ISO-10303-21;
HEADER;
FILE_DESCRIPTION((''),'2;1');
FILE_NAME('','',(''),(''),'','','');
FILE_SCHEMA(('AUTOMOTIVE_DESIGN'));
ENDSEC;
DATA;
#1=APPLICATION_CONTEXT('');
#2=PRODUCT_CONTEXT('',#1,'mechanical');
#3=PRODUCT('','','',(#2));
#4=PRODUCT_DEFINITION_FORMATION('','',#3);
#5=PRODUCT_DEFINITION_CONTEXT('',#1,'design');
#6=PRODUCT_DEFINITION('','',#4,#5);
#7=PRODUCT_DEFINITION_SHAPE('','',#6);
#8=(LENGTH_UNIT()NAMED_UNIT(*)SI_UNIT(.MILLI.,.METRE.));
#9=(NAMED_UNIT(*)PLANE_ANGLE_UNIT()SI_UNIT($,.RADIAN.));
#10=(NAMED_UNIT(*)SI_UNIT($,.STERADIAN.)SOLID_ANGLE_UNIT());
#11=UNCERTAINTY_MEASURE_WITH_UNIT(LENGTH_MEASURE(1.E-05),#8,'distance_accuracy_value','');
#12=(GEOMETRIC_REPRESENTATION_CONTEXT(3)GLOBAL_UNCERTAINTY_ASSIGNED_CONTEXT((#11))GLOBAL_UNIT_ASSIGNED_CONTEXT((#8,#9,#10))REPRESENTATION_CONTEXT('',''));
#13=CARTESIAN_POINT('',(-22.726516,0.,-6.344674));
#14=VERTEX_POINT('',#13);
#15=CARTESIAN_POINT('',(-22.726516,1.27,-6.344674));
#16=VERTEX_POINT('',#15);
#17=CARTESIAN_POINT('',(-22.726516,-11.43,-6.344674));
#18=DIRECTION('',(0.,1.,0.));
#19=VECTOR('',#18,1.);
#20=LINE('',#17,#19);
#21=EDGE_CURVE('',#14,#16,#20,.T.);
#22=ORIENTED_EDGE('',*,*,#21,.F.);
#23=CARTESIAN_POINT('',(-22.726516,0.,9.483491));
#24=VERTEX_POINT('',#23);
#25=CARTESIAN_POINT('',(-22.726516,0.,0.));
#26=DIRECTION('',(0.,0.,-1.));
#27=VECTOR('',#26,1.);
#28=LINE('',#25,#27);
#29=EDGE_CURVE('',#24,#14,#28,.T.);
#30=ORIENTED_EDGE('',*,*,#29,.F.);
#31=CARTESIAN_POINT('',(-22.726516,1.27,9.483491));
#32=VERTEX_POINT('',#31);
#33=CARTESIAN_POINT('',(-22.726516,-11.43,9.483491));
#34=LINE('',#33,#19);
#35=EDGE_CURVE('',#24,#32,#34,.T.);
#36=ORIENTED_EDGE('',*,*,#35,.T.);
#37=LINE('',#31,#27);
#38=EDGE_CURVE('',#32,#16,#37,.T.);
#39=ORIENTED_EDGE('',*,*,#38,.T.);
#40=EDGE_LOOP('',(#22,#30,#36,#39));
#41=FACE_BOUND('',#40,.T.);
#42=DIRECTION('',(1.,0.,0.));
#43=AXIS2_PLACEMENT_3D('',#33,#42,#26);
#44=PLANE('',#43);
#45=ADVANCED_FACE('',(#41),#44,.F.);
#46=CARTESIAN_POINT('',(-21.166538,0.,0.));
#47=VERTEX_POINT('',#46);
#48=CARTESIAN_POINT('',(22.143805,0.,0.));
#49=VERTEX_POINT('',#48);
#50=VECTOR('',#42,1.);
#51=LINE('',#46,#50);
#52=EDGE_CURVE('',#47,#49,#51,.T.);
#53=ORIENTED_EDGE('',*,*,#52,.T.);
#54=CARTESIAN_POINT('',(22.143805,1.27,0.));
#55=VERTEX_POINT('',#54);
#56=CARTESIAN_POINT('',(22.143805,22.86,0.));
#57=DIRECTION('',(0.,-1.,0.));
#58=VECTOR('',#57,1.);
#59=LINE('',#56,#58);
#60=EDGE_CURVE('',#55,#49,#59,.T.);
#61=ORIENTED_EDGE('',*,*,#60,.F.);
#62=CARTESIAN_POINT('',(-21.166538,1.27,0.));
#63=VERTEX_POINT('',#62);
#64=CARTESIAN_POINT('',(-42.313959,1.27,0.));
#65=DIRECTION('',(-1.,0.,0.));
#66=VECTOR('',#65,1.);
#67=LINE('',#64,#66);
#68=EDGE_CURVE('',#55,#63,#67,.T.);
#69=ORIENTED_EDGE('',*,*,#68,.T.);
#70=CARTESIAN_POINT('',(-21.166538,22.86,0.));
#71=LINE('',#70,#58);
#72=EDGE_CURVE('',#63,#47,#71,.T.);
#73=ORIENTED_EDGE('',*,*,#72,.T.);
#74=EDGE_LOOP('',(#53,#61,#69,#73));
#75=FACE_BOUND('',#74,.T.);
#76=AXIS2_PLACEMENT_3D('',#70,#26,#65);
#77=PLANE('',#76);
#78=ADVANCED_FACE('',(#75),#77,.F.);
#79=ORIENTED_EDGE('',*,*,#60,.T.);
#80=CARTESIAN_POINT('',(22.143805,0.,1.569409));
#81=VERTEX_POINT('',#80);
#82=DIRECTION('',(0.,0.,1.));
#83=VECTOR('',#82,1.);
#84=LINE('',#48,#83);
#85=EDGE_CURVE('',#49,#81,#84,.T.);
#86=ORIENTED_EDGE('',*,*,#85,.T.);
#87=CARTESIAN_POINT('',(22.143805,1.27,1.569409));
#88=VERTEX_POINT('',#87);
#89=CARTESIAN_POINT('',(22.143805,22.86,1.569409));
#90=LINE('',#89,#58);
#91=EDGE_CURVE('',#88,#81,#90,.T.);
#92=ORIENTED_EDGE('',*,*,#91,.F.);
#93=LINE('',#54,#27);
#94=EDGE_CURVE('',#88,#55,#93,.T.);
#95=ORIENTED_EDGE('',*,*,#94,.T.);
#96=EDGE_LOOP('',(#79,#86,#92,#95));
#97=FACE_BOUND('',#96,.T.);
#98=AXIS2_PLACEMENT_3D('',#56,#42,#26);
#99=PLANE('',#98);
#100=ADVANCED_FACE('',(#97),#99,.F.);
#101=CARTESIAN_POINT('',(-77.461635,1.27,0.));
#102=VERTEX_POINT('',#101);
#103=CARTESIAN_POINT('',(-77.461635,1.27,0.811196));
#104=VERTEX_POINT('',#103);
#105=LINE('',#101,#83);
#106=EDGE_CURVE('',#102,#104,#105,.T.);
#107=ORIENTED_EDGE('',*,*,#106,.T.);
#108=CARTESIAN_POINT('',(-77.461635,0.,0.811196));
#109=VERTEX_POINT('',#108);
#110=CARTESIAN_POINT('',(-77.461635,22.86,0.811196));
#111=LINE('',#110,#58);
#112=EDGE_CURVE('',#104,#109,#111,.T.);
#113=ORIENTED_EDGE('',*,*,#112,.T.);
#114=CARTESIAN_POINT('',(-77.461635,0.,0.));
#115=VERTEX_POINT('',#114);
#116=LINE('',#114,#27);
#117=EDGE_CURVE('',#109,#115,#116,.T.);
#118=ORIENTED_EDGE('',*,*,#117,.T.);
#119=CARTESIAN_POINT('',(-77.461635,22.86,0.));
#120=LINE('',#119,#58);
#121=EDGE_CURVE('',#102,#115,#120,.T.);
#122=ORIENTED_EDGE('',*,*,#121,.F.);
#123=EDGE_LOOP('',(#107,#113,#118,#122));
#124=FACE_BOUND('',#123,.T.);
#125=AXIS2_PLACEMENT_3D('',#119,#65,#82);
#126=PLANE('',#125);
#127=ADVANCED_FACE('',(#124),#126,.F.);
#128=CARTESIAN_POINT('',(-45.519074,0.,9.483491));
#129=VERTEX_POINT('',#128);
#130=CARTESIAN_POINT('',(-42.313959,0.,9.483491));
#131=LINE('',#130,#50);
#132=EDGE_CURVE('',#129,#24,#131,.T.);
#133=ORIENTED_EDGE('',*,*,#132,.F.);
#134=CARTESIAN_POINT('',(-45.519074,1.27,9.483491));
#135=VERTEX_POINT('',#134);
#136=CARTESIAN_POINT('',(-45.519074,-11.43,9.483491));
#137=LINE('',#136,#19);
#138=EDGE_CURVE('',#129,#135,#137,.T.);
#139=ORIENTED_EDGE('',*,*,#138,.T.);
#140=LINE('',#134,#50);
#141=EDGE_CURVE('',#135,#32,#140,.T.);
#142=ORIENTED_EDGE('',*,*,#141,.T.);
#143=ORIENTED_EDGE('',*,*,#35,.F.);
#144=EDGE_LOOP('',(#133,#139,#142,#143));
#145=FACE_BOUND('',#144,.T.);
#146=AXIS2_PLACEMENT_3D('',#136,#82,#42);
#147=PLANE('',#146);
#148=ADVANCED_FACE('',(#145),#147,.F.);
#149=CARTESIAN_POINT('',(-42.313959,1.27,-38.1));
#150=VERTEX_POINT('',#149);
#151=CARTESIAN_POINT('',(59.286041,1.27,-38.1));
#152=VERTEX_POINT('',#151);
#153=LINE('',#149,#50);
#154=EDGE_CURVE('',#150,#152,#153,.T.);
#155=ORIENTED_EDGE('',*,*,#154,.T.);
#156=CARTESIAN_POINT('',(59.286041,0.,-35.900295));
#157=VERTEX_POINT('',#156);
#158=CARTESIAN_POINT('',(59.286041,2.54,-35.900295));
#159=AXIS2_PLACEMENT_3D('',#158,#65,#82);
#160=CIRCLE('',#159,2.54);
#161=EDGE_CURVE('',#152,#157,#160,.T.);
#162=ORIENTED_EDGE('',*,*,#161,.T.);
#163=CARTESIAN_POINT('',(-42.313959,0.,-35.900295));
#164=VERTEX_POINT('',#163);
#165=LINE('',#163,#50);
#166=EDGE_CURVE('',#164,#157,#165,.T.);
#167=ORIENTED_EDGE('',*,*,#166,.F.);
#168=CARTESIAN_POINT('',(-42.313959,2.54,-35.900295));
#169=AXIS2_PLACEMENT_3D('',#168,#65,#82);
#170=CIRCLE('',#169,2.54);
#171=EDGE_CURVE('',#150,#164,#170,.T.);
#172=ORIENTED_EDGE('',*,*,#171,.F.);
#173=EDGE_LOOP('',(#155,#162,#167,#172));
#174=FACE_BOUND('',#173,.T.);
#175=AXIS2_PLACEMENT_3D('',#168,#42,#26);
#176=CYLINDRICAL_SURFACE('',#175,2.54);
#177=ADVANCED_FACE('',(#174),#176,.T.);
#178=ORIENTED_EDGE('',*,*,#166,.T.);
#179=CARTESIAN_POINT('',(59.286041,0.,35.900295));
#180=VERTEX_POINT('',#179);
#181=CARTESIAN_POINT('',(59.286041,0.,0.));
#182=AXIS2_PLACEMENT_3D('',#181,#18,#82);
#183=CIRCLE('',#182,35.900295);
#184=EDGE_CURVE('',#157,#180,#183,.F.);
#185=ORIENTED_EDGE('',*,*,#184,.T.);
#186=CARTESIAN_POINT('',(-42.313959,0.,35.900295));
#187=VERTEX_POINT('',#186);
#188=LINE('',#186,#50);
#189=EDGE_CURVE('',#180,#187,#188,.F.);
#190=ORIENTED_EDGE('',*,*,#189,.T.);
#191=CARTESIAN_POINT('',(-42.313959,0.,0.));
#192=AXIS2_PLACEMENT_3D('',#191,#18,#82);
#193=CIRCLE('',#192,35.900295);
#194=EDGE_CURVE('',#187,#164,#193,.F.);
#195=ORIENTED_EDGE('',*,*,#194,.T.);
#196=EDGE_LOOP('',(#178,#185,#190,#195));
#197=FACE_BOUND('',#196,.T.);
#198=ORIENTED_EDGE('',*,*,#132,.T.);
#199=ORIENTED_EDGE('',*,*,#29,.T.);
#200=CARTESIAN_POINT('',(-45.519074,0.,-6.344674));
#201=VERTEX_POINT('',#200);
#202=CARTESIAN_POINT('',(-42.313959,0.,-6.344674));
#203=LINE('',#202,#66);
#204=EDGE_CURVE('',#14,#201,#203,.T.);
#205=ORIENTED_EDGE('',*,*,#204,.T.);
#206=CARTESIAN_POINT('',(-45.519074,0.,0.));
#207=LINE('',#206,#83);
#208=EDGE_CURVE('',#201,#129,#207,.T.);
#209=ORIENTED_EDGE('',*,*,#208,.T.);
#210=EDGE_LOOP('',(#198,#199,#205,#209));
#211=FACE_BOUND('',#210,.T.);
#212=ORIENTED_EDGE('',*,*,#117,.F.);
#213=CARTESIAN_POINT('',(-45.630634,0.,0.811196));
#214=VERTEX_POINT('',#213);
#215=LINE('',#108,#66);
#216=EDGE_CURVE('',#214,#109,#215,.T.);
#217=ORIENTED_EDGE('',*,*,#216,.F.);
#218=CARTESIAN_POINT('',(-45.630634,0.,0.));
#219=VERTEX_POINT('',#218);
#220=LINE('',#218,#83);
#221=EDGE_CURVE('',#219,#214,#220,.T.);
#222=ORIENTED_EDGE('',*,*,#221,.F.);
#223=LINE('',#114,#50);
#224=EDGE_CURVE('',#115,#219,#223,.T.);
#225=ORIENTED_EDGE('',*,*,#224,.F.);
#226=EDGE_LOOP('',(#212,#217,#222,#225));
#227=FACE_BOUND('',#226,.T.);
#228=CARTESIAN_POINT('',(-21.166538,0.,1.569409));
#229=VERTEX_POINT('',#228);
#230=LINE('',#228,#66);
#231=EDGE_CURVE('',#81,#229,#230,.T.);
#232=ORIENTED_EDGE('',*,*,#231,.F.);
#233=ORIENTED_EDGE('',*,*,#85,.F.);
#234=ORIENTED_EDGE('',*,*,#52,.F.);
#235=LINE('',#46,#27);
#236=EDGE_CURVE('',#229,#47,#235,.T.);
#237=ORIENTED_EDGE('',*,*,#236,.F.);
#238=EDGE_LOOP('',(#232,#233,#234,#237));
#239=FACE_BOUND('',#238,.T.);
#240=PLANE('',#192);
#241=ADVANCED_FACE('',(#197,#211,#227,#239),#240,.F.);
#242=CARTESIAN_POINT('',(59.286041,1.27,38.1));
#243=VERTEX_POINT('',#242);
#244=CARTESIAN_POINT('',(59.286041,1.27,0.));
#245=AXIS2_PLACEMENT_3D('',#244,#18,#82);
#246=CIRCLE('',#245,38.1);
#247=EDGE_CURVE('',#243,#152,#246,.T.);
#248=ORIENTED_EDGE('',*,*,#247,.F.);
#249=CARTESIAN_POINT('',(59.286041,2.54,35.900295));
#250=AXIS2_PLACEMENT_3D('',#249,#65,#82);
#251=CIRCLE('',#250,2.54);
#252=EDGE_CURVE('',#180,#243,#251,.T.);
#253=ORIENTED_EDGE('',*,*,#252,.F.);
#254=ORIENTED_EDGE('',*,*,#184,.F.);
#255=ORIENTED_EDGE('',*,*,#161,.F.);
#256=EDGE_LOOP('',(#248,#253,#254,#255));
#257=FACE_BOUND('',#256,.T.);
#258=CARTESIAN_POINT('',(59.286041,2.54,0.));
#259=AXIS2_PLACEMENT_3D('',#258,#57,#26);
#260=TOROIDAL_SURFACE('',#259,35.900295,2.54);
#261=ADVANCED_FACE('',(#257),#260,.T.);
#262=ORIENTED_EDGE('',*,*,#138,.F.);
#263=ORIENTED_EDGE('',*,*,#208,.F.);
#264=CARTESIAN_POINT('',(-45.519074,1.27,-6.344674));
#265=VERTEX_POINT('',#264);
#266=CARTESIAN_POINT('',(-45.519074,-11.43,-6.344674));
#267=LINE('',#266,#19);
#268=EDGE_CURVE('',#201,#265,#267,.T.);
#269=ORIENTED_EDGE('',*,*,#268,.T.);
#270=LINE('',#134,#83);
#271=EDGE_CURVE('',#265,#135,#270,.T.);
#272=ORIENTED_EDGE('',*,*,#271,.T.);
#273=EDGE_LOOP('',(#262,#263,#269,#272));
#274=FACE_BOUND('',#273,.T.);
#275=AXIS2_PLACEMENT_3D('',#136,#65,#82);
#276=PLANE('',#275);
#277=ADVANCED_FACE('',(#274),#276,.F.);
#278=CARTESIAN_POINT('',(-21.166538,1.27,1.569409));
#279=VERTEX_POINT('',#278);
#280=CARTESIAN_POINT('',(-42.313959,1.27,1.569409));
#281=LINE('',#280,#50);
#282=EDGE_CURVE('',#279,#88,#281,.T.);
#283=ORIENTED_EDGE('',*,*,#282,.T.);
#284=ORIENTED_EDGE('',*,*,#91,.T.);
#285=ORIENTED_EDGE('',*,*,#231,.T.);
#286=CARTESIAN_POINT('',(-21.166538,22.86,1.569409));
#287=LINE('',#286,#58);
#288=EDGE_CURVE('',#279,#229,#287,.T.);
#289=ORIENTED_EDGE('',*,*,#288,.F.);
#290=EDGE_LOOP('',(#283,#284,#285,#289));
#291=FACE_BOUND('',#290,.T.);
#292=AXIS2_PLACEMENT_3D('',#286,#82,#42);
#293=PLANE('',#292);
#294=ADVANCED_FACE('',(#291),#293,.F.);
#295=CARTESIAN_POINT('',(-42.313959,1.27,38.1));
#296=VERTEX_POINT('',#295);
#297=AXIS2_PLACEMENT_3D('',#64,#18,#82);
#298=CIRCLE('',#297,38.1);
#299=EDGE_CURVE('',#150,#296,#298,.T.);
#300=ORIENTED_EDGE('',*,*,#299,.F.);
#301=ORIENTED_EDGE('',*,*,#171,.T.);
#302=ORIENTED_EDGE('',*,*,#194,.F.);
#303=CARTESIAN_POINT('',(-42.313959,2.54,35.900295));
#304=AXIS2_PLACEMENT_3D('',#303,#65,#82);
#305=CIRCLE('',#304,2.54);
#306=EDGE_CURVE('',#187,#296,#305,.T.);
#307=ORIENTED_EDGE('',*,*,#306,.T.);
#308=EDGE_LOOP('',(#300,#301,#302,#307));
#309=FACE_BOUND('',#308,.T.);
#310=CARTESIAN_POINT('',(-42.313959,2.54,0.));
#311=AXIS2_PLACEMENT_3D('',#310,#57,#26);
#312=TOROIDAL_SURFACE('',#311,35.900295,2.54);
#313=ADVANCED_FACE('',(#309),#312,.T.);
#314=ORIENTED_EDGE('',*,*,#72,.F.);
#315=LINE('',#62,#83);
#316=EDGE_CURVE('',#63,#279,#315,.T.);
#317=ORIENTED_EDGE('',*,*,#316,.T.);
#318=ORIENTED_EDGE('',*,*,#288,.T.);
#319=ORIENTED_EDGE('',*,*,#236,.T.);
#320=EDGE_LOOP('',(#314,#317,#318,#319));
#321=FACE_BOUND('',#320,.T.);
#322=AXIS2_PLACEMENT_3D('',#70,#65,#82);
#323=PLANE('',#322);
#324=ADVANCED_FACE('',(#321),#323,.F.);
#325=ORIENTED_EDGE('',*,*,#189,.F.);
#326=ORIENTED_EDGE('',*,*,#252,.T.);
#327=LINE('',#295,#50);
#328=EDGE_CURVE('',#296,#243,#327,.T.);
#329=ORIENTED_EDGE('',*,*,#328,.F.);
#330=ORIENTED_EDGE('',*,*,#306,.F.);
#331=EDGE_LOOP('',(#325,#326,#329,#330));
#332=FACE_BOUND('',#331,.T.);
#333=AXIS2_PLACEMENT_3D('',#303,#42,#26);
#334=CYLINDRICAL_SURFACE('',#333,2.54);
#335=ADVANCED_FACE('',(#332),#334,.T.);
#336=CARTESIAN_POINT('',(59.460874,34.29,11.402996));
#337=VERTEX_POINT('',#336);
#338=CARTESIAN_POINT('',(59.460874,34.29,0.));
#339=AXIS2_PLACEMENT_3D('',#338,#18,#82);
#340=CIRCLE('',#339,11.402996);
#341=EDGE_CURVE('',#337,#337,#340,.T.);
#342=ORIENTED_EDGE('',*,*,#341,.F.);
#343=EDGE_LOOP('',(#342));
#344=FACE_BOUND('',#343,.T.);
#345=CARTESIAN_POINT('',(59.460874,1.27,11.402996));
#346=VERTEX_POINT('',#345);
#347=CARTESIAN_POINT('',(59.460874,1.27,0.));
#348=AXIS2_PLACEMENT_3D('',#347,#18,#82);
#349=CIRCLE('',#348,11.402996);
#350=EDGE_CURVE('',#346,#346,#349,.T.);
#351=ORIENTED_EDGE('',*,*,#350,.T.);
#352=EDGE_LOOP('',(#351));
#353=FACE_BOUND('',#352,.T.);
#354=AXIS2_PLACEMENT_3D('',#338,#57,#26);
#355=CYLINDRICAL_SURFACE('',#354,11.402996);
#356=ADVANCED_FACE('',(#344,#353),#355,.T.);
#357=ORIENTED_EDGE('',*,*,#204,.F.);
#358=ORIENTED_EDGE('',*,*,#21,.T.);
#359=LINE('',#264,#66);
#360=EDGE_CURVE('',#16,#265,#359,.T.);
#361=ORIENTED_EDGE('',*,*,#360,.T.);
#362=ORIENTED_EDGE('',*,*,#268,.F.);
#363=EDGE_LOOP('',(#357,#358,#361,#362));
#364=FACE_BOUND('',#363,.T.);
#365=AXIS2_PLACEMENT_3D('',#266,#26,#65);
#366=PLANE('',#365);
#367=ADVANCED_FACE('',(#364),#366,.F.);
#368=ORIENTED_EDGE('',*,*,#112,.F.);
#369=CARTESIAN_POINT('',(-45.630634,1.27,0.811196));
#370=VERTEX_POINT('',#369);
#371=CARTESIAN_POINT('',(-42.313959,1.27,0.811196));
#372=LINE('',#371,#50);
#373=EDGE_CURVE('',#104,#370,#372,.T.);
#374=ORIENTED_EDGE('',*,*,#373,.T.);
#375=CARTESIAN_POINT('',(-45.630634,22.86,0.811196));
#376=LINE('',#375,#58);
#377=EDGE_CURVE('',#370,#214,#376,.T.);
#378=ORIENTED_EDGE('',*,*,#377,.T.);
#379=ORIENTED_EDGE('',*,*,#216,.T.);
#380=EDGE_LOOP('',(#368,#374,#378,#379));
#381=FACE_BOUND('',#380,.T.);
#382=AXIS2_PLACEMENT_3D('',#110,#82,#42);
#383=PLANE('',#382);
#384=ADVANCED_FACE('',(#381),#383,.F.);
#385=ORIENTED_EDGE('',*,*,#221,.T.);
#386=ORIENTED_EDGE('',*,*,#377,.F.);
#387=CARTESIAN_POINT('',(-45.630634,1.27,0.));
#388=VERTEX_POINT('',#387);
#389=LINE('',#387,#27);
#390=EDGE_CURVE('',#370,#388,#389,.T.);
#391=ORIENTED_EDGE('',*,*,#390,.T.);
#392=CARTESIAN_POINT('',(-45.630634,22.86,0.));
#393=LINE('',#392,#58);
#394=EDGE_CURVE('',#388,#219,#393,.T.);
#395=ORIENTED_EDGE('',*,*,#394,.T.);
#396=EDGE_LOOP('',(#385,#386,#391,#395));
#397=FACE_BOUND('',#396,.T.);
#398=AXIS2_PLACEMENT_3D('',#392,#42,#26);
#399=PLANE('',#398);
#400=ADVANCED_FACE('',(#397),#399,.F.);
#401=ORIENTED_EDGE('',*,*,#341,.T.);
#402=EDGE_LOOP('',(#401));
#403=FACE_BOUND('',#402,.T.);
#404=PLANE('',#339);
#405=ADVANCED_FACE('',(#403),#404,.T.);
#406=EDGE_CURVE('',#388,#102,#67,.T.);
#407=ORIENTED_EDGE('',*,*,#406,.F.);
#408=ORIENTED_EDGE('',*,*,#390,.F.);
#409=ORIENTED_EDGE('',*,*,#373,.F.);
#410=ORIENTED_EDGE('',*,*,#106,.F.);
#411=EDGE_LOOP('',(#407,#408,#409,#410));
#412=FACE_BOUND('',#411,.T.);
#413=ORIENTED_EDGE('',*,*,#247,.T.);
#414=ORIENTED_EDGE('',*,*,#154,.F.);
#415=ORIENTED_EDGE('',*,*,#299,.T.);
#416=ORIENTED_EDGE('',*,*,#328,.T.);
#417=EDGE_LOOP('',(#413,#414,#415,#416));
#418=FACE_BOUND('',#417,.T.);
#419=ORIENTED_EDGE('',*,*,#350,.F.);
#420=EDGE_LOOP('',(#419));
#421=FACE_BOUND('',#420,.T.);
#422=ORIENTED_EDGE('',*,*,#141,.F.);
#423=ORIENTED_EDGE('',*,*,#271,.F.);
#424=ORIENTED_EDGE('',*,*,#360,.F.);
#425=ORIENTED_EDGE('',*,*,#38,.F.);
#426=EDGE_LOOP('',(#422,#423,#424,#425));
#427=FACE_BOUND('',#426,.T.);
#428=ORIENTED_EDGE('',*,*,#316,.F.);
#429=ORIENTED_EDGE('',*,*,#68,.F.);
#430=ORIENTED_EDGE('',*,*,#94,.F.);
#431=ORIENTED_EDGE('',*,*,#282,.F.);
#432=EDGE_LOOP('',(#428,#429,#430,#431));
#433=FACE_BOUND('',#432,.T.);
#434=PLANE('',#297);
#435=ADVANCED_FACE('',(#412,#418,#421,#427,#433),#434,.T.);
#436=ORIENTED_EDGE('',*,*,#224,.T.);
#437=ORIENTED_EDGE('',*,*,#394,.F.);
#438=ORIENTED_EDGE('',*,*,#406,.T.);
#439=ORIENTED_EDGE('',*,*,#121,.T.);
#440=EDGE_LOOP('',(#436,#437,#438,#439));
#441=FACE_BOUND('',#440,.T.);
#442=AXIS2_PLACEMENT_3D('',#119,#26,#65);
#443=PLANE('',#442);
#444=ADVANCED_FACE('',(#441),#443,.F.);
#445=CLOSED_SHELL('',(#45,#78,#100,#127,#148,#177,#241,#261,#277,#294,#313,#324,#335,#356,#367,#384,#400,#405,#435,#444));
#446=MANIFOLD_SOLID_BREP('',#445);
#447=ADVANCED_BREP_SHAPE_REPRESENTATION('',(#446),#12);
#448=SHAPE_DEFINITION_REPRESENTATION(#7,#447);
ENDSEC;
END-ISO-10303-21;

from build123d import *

# Parameters (mm, degrees)
BOSS_EXTRUDE4_DEPTH = 1.27
SKETCH11_R          = 11.402996403
BOSS_EXTRUDE6_DEPTH = 33.02
SKETCH12_W          = 22.792557874
SKETCH12_H          = 15.82816519
CUT_EXTRUDE4_DEPTH  = 12.7
FILLET1_R           = 2.54
SKETCH13_W          = 31.831001044
SKETCH13_H          = 0.811195954
SKETCH13_W_2        = 43.310342169
SKETCH13_H_2        = 1.569408792
CUT_EXTRUDE5_DEPTH  = 22.86


with BuildPart() as part:
    # Sketch2 → Boss-Extrude4 (new body)
    with BuildSketch(Plane(origin=(0, 0, 0), x_dir=(1, 0, 0), z_dir=(0, 1, 0))):
        with BuildLine():
            Line((-42.31395881, 38.1), (59.28604119, 38.1))
            ThreePointArc((59.28604119, 38.1), (97.38604119, 0), (59.28604119, -38.1))
            Line((59.28604119, -38.1), (-42.31395881, -38.1))
            ThreePointArc((-42.31395881, -38.1), (-80.41395881, 0), (-42.31395881, 38.1))
        make_face()
    extrude(amount=BOSS_EXTRUDE4_DEPTH)

    # Sketch11 → Boss-Extrude6 (add)
    with BuildSketch(Plane(origin=(0, 1.27, 0), x_dir=(1, 0, 0), z_dir=(0, 1, 0))):
        with Locations(Location((59.460873827, 0, 0), (0, 0, 270))):
            Circle(SKETCH11_R)
    extrude(amount=BOSS_EXTRUDE6_DEPTH)

    # Sketch12 → Cut-Extrude4 (cut)
    with BuildSketch(Plane(origin=(0, 1.27, 0), x_dir=(1, 0, 0), z_dir=(0, 1, 0))):
        with Locations((-34.122794633, -1.569408792)):
            Rectangle(SKETCH12_W, SKETCH12_H)
    extrude(amount=-CUT_EXTRUDE4_DEPTH, mode=Mode.SUBTRACT)

    # Fillet1
    # the kernel refuses this fillet: 2.54 mm, written as the material it takes off along each edge
    with BuildSketch(Plane(origin=(-42.31395881, 0, 0), x_dir=(0, 0, 1), z_dir=(1, 0, 0))) as fillet1_piece_1:
        with BuildLine():
            CenterArc((35.900295474, -2.54), FILLET1_R, 30, 60)
            Line((35.900295474, 0), (35.900295474, 0.0508))
            Line((35.900295474, 0.0508), (38.1, 0.0508))
            Line((38.1, 0.0508), (38.1508, 0))
            ThreePointArc((38.1508, 0), (38.1508, -0.635), (38.143994091, -1.2446))
            Line((38.143994091, -1.2446), (38.1, -1.27))
        make_face()
    revolve(axis=Axis((-42.31395881, 0, 0), (0, -1, 0)), revolution_arc=180, mode=Mode.SUBTRACT)
    with BuildSketch(Plane(origin=(59.28604119, 0, 38.1), x_dir=(0, 1, 0), z_dir=(-1, 0, 0))) as fillet1_piece_2:
        with BuildLine():
            CenterArc((2.54, 2.199704526), FILLET1_R, 180, 60)
            Line((0, 2.199704526), (-0.0508, 2.199704526))
            Line((-0.0508, 2.199704526), (-0.0508, 0))
            Line((-0.0508, 0), (0, -0.0508))
            ThreePointArc((0, -0.0508), (0.635, -0.0508), (1.2446, -0.043994091))
            Line((1.2446, -0.043994091), (1.27, 0))
        make_face()
    extrude(amount=101.6, mode=Mode.SUBTRACT)
    with BuildSketch(Plane(origin=(59.28604119, 0, 0), x_dir=(0, 0, -1), z_dir=(-1, 0, 0))) as fillet1_piece_3:
        with BuildLine():
            CenterArc((35.900295474, -2.54), FILLET1_R, 30, 60)
            Line((35.900295474, 0), (35.900295474, 0.0508))
            Line((35.900295474, 0.0508), (38.1, 0.0508))
            Line((38.1, 0.0508), (38.1508, 0))
            ThreePointArc((38.1508, 0), (38.1508, -0.635), (38.143994091, -1.2446))
            Line((38.143994091, -1.2446), (38.1, -1.27))
        make_face()
    revolve(axis=Axis((59.28604119, 0, 0), (0, -1, 0)), revolution_arc=180, mode=Mode.SUBTRACT)
    with BuildSketch(Plane(origin=(-42.31395881, 0, -38.1), x_dir=(0, 0, 1), z_dir=(1, 0, 0))) as fillet1_piece_4:
        with BuildLine():
            CenterArc((2.199704526, -2.54), FILLET1_R, 90, 60)
            Line((0, -1.27), (-0.043994091, -1.2446))
            ThreePointArc((-0.043994091, -1.2446), (-0.0508, -0.635), (-0.0508, 0))
            Line((-0.0508, 0), (0, 0.0508))
            Line((0, 0.0508), (2.199704526, 0.0508))
            Line((2.199704526, 0.0508), (2.199704526, 0))
        make_face()
    extrude(amount=101.6, mode=Mode.SUBTRACT)

    # Sketch13 → Cut-Extrude5 (cut)
    with BuildSketch(Plane.XZ):
        with Locations((-61.546134254, 0.405597977)):
            Rectangle(SKETCH13_W, SKETCH13_H)
        with Locations((0.488633532, 0.784704396)):
            Rectangle(SKETCH13_W_2, SKETCH13_H_2)
    extrude(amount=-CUT_EXTRUDE5_DEPTH, mode=Mode.SUBTRACT)


solid = part.part
